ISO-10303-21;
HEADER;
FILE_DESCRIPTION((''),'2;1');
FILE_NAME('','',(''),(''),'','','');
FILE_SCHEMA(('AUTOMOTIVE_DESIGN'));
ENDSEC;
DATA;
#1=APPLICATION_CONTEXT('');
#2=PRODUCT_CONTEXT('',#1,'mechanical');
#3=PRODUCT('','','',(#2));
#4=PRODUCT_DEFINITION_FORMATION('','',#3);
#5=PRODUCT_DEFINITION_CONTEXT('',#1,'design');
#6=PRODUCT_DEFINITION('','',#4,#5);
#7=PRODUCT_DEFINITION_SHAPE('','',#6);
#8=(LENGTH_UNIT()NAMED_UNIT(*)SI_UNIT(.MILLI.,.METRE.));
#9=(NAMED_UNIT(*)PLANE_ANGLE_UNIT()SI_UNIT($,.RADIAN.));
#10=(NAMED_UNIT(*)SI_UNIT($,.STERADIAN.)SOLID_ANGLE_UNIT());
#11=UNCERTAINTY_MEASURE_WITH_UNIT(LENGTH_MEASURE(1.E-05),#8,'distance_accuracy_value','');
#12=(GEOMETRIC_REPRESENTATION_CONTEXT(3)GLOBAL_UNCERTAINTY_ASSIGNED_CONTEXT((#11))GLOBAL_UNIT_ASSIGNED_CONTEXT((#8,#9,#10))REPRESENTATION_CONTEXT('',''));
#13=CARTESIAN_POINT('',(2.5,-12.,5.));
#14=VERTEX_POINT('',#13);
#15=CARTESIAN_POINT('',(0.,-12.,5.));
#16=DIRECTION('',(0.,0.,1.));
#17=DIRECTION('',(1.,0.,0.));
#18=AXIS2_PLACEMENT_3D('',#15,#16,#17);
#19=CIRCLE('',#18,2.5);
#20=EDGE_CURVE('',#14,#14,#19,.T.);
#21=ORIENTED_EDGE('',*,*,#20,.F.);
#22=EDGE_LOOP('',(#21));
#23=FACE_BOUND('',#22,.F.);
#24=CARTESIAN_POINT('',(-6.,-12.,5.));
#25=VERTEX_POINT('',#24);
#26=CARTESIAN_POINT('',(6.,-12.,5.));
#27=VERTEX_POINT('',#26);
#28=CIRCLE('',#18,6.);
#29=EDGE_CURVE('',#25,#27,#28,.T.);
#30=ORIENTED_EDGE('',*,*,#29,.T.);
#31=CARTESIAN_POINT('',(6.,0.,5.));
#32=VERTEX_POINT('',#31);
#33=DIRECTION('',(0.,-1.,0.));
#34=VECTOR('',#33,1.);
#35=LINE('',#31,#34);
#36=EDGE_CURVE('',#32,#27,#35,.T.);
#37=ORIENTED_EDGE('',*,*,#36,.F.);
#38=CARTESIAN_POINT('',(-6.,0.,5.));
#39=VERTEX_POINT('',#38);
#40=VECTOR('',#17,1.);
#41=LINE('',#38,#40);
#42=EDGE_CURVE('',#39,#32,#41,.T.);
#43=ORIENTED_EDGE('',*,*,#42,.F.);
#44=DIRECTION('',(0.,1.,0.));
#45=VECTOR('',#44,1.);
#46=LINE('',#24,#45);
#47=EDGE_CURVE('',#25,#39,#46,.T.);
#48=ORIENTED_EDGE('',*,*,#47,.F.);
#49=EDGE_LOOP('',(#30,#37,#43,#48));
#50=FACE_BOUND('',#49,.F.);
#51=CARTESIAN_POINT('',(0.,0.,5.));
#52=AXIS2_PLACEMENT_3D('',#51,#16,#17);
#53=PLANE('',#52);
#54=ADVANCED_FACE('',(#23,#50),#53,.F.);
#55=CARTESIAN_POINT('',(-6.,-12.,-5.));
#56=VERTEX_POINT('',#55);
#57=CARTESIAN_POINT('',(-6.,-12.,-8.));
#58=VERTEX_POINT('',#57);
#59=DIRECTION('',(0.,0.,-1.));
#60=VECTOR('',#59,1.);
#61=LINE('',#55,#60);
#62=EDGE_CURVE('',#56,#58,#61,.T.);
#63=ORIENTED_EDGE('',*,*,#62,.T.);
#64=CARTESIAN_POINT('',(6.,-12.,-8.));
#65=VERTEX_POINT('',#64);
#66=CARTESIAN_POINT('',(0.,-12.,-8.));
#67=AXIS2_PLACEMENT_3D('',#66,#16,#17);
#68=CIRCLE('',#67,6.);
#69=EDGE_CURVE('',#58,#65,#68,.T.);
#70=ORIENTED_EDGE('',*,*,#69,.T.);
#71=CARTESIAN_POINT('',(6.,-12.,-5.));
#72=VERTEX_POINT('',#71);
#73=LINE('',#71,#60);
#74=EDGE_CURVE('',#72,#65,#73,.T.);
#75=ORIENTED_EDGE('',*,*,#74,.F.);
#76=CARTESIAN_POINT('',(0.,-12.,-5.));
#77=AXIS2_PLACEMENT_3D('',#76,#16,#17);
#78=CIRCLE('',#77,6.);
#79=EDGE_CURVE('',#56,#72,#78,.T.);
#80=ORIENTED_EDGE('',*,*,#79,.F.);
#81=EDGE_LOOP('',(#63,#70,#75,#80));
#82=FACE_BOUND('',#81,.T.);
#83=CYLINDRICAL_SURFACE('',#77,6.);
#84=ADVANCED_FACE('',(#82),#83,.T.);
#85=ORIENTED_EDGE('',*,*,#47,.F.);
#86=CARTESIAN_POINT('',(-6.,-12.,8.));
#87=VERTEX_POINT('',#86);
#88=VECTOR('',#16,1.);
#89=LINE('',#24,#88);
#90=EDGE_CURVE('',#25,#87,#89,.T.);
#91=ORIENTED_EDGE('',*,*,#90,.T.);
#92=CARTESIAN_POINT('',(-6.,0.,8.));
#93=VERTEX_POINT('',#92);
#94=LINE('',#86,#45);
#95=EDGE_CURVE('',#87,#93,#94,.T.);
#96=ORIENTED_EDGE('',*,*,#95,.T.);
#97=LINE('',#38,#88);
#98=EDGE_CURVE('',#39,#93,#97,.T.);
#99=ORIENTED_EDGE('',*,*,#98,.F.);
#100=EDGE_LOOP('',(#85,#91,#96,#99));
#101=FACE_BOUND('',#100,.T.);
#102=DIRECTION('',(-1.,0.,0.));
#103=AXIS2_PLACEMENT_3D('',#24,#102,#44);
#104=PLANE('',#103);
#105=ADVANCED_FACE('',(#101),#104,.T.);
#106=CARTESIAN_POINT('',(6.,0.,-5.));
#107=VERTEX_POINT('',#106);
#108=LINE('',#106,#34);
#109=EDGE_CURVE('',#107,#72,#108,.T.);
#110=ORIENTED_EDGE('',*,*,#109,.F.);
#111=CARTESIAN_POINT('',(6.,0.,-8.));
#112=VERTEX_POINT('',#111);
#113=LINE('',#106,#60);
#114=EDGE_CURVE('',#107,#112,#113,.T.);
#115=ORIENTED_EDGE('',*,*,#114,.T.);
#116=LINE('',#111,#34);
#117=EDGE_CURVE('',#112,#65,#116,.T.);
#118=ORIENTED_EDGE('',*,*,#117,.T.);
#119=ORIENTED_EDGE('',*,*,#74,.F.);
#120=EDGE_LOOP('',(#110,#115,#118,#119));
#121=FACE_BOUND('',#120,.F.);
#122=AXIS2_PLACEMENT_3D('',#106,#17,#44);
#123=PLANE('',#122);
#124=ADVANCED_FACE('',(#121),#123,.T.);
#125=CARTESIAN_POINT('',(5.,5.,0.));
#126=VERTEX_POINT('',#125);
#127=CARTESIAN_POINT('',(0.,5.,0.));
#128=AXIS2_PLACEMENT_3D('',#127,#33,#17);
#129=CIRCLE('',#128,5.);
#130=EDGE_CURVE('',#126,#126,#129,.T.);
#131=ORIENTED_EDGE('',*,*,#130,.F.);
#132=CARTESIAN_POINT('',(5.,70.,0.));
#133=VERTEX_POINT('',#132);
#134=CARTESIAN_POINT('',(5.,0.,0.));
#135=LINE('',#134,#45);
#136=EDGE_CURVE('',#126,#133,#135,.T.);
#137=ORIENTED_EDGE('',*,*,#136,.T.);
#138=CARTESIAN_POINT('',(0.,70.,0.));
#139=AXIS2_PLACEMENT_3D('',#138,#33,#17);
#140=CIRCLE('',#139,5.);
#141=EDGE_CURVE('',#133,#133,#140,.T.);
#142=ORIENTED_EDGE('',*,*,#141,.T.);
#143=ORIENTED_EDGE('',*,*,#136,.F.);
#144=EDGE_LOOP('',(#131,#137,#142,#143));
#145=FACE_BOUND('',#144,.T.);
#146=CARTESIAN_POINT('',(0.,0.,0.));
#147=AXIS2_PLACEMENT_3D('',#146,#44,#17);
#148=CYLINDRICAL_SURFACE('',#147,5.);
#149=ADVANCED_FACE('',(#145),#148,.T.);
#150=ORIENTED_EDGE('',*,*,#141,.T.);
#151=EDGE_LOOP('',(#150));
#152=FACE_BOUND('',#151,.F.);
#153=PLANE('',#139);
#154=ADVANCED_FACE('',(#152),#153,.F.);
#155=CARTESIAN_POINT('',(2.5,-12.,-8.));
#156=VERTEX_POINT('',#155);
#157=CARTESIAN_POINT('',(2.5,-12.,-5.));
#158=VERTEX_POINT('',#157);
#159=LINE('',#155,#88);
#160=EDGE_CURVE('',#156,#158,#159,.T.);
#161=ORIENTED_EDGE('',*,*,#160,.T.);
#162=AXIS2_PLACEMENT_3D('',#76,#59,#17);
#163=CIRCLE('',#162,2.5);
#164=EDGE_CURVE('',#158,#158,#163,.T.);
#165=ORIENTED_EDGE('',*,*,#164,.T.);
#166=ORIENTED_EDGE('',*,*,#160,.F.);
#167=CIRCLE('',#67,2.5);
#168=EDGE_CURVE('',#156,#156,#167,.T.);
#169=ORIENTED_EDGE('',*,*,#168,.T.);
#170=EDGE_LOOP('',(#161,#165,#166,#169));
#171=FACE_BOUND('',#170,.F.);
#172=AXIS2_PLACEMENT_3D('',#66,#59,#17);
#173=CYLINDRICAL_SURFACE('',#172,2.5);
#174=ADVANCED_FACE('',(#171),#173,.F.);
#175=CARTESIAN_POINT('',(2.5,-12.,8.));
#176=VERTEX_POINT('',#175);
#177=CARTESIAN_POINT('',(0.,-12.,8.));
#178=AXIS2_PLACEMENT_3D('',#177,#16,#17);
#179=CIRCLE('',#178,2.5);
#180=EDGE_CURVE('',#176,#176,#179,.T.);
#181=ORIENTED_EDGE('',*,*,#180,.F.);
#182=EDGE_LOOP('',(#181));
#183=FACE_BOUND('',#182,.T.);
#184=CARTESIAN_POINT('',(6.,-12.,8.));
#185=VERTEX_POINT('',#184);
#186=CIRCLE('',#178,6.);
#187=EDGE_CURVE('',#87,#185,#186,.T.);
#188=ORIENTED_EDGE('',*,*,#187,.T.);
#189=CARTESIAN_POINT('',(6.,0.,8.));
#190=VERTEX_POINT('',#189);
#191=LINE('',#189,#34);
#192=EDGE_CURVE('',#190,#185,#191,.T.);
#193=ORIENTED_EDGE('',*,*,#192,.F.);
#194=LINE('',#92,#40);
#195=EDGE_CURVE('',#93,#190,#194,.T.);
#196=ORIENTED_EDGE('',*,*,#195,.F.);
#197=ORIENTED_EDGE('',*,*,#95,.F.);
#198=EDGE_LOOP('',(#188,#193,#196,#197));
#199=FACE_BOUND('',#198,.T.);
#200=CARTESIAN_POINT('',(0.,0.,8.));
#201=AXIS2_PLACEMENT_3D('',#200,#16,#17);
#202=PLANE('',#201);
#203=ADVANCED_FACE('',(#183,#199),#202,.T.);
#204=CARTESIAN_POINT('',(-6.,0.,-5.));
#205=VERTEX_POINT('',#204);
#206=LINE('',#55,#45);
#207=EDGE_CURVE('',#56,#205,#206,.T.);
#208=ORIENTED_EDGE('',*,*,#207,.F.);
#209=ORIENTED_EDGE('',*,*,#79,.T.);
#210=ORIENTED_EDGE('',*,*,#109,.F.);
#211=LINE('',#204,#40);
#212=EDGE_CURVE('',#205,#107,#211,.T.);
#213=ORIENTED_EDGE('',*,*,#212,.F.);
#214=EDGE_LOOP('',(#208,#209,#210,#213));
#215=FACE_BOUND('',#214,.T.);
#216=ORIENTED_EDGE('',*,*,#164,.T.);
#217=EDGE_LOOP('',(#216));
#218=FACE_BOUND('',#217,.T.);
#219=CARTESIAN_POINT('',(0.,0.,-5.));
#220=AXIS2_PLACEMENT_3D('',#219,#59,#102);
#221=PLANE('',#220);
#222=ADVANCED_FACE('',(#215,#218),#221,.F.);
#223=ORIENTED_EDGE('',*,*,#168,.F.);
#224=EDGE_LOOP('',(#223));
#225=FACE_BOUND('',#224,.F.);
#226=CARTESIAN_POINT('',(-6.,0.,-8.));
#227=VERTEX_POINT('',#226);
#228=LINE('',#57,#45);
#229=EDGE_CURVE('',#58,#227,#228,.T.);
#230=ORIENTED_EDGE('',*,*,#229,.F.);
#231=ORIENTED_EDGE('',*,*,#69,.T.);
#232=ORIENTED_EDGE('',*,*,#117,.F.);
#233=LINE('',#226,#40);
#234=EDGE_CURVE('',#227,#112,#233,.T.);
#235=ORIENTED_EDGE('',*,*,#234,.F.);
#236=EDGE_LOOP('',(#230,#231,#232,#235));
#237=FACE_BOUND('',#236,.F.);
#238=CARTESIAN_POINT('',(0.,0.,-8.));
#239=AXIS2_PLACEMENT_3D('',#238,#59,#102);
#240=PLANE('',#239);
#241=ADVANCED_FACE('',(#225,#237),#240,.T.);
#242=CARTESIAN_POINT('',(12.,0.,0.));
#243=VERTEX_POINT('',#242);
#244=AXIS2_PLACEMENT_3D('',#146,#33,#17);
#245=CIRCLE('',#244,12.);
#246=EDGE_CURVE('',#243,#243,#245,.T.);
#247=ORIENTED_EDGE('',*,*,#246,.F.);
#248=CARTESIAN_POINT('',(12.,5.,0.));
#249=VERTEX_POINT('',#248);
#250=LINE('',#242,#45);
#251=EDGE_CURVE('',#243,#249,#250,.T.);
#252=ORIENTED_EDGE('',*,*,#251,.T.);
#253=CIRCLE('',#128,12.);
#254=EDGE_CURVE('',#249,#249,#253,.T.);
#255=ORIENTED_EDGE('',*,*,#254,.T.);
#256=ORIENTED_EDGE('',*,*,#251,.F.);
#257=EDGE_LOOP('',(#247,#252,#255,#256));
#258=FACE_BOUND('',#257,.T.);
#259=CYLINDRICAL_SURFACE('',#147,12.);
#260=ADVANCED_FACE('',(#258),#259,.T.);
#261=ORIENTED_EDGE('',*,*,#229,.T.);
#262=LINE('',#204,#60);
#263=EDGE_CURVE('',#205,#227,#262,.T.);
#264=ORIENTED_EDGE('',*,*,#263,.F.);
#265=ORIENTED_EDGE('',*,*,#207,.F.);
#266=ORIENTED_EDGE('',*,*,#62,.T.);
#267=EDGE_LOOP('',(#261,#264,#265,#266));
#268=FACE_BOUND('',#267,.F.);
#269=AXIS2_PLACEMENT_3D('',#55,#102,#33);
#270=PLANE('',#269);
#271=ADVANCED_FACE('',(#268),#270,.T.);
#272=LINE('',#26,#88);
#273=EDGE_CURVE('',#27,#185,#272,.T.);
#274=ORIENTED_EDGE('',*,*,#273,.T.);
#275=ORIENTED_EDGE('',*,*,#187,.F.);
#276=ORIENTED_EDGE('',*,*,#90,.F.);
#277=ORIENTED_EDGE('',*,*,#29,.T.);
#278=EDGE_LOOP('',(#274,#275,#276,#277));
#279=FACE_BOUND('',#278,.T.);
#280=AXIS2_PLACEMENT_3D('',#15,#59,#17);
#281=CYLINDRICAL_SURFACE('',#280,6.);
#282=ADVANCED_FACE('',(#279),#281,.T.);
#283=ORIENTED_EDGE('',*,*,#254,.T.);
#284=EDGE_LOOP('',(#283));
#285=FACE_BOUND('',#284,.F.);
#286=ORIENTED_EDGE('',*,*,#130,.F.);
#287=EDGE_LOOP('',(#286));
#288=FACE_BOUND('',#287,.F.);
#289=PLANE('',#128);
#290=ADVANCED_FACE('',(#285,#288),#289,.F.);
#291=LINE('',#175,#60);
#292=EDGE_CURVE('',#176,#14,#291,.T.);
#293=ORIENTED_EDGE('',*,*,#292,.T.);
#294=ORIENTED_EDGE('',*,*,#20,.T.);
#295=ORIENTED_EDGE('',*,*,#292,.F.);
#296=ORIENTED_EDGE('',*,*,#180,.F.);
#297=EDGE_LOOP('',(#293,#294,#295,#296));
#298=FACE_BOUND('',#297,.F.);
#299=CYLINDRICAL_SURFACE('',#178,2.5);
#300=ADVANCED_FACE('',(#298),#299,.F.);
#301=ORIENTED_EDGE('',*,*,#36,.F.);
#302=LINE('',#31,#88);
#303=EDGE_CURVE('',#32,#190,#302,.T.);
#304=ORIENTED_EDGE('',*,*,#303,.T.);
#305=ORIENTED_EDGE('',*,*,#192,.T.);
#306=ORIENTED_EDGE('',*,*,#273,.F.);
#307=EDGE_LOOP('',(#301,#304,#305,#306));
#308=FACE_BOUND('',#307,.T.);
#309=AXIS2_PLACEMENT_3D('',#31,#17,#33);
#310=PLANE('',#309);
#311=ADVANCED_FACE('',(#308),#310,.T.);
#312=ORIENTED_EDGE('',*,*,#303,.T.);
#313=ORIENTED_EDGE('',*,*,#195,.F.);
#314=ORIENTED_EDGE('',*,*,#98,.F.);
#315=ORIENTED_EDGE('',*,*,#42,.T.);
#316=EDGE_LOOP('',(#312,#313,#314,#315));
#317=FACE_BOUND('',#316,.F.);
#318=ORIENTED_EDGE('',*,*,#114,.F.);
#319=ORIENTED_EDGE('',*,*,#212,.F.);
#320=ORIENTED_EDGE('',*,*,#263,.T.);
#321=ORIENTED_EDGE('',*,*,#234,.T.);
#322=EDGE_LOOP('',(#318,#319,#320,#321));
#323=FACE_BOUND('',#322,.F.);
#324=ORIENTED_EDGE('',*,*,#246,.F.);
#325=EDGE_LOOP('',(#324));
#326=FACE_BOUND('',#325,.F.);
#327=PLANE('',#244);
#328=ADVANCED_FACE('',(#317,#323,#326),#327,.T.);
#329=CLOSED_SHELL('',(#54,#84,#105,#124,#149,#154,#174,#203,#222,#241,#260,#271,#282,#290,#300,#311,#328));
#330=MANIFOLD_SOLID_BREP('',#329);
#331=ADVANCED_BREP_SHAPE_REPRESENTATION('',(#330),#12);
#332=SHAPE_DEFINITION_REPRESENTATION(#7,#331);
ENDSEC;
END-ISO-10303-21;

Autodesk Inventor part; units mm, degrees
ref_plane "YZ Plane" through (0, 0, 0) normal (1, 0, 0) x (0, 1, 0)
ref_plane "XZ Plane" through (0, 0, 0) normal (0, 1, 0) x (-1, 0, 0)
sketch "草圖1" plane through (0, 0, 0) normal (0, 0, 1) x (1, 0, 0)
  line L0 (0, 0) -> (5, 0)
  line L1 (5, 0) -> (5, 70)
  line L2 (5, 70) -> (0, 70)
  line L3 (0, 70) -> (0, 0)
  line L4 (0, 0) -> (12, 0)
  line L5 (12, 0) -> (12, 5)
  line L6 (12, 5) -> (0, 5)
  line L7 (0, 5) -> (0, 0)
  dimension "d0" = 10
  dimension "d1" = 70
  dimension "d2" = 5
  dimension "d3" = 12
revolve "迴轉1" add sketch "草圖1" angle 360 about axis through (0, 70, 0) along (0, -1, 0)
ref_plane "工作平面1" through (0, 0, 5) normal (0, 0, 1) x (1, 0, 0)
sketch "草圖2" plane through (0, 0, 5) normal (0, 0, 1) x (1, 0, 0)
  line L0 (-6, 0) -> (6, 0)
  line L1 (6, 0) -> (6, -12)
  line L2 (6, -12) -> (-6, -12)
  line L3 (-6, -12) -> (-6, 0)
  line L4 (-12, 0) -> (12, 0) projected
  circle A0 centre (0, -12) radius 6
  point P0 (0, 0)
  dimension "d6" = 12
  dimension "d7" = 12
extrude "擠出1" add sketch "草圖2" along normal blind 3
sketch "草圖3" plane through (0, 0, 8) normal (0, 0, 1) x (1, 0, 0)
  arc A0 (-6, -12) -> (6, -12) centre (0, -12) ccw projected
  circle A1 centre (0, -12) radius 2.5
  point P0 (0, 0)
  dimension "d10" = 5
extrude "擠出2" cut sketch "草圖3" against normal through all
mirror "鏡射1" about plane through (0, 0, 0) normal (0, 0, 1) of "擠出2", "擠出1"
properties part number "從動桿"
